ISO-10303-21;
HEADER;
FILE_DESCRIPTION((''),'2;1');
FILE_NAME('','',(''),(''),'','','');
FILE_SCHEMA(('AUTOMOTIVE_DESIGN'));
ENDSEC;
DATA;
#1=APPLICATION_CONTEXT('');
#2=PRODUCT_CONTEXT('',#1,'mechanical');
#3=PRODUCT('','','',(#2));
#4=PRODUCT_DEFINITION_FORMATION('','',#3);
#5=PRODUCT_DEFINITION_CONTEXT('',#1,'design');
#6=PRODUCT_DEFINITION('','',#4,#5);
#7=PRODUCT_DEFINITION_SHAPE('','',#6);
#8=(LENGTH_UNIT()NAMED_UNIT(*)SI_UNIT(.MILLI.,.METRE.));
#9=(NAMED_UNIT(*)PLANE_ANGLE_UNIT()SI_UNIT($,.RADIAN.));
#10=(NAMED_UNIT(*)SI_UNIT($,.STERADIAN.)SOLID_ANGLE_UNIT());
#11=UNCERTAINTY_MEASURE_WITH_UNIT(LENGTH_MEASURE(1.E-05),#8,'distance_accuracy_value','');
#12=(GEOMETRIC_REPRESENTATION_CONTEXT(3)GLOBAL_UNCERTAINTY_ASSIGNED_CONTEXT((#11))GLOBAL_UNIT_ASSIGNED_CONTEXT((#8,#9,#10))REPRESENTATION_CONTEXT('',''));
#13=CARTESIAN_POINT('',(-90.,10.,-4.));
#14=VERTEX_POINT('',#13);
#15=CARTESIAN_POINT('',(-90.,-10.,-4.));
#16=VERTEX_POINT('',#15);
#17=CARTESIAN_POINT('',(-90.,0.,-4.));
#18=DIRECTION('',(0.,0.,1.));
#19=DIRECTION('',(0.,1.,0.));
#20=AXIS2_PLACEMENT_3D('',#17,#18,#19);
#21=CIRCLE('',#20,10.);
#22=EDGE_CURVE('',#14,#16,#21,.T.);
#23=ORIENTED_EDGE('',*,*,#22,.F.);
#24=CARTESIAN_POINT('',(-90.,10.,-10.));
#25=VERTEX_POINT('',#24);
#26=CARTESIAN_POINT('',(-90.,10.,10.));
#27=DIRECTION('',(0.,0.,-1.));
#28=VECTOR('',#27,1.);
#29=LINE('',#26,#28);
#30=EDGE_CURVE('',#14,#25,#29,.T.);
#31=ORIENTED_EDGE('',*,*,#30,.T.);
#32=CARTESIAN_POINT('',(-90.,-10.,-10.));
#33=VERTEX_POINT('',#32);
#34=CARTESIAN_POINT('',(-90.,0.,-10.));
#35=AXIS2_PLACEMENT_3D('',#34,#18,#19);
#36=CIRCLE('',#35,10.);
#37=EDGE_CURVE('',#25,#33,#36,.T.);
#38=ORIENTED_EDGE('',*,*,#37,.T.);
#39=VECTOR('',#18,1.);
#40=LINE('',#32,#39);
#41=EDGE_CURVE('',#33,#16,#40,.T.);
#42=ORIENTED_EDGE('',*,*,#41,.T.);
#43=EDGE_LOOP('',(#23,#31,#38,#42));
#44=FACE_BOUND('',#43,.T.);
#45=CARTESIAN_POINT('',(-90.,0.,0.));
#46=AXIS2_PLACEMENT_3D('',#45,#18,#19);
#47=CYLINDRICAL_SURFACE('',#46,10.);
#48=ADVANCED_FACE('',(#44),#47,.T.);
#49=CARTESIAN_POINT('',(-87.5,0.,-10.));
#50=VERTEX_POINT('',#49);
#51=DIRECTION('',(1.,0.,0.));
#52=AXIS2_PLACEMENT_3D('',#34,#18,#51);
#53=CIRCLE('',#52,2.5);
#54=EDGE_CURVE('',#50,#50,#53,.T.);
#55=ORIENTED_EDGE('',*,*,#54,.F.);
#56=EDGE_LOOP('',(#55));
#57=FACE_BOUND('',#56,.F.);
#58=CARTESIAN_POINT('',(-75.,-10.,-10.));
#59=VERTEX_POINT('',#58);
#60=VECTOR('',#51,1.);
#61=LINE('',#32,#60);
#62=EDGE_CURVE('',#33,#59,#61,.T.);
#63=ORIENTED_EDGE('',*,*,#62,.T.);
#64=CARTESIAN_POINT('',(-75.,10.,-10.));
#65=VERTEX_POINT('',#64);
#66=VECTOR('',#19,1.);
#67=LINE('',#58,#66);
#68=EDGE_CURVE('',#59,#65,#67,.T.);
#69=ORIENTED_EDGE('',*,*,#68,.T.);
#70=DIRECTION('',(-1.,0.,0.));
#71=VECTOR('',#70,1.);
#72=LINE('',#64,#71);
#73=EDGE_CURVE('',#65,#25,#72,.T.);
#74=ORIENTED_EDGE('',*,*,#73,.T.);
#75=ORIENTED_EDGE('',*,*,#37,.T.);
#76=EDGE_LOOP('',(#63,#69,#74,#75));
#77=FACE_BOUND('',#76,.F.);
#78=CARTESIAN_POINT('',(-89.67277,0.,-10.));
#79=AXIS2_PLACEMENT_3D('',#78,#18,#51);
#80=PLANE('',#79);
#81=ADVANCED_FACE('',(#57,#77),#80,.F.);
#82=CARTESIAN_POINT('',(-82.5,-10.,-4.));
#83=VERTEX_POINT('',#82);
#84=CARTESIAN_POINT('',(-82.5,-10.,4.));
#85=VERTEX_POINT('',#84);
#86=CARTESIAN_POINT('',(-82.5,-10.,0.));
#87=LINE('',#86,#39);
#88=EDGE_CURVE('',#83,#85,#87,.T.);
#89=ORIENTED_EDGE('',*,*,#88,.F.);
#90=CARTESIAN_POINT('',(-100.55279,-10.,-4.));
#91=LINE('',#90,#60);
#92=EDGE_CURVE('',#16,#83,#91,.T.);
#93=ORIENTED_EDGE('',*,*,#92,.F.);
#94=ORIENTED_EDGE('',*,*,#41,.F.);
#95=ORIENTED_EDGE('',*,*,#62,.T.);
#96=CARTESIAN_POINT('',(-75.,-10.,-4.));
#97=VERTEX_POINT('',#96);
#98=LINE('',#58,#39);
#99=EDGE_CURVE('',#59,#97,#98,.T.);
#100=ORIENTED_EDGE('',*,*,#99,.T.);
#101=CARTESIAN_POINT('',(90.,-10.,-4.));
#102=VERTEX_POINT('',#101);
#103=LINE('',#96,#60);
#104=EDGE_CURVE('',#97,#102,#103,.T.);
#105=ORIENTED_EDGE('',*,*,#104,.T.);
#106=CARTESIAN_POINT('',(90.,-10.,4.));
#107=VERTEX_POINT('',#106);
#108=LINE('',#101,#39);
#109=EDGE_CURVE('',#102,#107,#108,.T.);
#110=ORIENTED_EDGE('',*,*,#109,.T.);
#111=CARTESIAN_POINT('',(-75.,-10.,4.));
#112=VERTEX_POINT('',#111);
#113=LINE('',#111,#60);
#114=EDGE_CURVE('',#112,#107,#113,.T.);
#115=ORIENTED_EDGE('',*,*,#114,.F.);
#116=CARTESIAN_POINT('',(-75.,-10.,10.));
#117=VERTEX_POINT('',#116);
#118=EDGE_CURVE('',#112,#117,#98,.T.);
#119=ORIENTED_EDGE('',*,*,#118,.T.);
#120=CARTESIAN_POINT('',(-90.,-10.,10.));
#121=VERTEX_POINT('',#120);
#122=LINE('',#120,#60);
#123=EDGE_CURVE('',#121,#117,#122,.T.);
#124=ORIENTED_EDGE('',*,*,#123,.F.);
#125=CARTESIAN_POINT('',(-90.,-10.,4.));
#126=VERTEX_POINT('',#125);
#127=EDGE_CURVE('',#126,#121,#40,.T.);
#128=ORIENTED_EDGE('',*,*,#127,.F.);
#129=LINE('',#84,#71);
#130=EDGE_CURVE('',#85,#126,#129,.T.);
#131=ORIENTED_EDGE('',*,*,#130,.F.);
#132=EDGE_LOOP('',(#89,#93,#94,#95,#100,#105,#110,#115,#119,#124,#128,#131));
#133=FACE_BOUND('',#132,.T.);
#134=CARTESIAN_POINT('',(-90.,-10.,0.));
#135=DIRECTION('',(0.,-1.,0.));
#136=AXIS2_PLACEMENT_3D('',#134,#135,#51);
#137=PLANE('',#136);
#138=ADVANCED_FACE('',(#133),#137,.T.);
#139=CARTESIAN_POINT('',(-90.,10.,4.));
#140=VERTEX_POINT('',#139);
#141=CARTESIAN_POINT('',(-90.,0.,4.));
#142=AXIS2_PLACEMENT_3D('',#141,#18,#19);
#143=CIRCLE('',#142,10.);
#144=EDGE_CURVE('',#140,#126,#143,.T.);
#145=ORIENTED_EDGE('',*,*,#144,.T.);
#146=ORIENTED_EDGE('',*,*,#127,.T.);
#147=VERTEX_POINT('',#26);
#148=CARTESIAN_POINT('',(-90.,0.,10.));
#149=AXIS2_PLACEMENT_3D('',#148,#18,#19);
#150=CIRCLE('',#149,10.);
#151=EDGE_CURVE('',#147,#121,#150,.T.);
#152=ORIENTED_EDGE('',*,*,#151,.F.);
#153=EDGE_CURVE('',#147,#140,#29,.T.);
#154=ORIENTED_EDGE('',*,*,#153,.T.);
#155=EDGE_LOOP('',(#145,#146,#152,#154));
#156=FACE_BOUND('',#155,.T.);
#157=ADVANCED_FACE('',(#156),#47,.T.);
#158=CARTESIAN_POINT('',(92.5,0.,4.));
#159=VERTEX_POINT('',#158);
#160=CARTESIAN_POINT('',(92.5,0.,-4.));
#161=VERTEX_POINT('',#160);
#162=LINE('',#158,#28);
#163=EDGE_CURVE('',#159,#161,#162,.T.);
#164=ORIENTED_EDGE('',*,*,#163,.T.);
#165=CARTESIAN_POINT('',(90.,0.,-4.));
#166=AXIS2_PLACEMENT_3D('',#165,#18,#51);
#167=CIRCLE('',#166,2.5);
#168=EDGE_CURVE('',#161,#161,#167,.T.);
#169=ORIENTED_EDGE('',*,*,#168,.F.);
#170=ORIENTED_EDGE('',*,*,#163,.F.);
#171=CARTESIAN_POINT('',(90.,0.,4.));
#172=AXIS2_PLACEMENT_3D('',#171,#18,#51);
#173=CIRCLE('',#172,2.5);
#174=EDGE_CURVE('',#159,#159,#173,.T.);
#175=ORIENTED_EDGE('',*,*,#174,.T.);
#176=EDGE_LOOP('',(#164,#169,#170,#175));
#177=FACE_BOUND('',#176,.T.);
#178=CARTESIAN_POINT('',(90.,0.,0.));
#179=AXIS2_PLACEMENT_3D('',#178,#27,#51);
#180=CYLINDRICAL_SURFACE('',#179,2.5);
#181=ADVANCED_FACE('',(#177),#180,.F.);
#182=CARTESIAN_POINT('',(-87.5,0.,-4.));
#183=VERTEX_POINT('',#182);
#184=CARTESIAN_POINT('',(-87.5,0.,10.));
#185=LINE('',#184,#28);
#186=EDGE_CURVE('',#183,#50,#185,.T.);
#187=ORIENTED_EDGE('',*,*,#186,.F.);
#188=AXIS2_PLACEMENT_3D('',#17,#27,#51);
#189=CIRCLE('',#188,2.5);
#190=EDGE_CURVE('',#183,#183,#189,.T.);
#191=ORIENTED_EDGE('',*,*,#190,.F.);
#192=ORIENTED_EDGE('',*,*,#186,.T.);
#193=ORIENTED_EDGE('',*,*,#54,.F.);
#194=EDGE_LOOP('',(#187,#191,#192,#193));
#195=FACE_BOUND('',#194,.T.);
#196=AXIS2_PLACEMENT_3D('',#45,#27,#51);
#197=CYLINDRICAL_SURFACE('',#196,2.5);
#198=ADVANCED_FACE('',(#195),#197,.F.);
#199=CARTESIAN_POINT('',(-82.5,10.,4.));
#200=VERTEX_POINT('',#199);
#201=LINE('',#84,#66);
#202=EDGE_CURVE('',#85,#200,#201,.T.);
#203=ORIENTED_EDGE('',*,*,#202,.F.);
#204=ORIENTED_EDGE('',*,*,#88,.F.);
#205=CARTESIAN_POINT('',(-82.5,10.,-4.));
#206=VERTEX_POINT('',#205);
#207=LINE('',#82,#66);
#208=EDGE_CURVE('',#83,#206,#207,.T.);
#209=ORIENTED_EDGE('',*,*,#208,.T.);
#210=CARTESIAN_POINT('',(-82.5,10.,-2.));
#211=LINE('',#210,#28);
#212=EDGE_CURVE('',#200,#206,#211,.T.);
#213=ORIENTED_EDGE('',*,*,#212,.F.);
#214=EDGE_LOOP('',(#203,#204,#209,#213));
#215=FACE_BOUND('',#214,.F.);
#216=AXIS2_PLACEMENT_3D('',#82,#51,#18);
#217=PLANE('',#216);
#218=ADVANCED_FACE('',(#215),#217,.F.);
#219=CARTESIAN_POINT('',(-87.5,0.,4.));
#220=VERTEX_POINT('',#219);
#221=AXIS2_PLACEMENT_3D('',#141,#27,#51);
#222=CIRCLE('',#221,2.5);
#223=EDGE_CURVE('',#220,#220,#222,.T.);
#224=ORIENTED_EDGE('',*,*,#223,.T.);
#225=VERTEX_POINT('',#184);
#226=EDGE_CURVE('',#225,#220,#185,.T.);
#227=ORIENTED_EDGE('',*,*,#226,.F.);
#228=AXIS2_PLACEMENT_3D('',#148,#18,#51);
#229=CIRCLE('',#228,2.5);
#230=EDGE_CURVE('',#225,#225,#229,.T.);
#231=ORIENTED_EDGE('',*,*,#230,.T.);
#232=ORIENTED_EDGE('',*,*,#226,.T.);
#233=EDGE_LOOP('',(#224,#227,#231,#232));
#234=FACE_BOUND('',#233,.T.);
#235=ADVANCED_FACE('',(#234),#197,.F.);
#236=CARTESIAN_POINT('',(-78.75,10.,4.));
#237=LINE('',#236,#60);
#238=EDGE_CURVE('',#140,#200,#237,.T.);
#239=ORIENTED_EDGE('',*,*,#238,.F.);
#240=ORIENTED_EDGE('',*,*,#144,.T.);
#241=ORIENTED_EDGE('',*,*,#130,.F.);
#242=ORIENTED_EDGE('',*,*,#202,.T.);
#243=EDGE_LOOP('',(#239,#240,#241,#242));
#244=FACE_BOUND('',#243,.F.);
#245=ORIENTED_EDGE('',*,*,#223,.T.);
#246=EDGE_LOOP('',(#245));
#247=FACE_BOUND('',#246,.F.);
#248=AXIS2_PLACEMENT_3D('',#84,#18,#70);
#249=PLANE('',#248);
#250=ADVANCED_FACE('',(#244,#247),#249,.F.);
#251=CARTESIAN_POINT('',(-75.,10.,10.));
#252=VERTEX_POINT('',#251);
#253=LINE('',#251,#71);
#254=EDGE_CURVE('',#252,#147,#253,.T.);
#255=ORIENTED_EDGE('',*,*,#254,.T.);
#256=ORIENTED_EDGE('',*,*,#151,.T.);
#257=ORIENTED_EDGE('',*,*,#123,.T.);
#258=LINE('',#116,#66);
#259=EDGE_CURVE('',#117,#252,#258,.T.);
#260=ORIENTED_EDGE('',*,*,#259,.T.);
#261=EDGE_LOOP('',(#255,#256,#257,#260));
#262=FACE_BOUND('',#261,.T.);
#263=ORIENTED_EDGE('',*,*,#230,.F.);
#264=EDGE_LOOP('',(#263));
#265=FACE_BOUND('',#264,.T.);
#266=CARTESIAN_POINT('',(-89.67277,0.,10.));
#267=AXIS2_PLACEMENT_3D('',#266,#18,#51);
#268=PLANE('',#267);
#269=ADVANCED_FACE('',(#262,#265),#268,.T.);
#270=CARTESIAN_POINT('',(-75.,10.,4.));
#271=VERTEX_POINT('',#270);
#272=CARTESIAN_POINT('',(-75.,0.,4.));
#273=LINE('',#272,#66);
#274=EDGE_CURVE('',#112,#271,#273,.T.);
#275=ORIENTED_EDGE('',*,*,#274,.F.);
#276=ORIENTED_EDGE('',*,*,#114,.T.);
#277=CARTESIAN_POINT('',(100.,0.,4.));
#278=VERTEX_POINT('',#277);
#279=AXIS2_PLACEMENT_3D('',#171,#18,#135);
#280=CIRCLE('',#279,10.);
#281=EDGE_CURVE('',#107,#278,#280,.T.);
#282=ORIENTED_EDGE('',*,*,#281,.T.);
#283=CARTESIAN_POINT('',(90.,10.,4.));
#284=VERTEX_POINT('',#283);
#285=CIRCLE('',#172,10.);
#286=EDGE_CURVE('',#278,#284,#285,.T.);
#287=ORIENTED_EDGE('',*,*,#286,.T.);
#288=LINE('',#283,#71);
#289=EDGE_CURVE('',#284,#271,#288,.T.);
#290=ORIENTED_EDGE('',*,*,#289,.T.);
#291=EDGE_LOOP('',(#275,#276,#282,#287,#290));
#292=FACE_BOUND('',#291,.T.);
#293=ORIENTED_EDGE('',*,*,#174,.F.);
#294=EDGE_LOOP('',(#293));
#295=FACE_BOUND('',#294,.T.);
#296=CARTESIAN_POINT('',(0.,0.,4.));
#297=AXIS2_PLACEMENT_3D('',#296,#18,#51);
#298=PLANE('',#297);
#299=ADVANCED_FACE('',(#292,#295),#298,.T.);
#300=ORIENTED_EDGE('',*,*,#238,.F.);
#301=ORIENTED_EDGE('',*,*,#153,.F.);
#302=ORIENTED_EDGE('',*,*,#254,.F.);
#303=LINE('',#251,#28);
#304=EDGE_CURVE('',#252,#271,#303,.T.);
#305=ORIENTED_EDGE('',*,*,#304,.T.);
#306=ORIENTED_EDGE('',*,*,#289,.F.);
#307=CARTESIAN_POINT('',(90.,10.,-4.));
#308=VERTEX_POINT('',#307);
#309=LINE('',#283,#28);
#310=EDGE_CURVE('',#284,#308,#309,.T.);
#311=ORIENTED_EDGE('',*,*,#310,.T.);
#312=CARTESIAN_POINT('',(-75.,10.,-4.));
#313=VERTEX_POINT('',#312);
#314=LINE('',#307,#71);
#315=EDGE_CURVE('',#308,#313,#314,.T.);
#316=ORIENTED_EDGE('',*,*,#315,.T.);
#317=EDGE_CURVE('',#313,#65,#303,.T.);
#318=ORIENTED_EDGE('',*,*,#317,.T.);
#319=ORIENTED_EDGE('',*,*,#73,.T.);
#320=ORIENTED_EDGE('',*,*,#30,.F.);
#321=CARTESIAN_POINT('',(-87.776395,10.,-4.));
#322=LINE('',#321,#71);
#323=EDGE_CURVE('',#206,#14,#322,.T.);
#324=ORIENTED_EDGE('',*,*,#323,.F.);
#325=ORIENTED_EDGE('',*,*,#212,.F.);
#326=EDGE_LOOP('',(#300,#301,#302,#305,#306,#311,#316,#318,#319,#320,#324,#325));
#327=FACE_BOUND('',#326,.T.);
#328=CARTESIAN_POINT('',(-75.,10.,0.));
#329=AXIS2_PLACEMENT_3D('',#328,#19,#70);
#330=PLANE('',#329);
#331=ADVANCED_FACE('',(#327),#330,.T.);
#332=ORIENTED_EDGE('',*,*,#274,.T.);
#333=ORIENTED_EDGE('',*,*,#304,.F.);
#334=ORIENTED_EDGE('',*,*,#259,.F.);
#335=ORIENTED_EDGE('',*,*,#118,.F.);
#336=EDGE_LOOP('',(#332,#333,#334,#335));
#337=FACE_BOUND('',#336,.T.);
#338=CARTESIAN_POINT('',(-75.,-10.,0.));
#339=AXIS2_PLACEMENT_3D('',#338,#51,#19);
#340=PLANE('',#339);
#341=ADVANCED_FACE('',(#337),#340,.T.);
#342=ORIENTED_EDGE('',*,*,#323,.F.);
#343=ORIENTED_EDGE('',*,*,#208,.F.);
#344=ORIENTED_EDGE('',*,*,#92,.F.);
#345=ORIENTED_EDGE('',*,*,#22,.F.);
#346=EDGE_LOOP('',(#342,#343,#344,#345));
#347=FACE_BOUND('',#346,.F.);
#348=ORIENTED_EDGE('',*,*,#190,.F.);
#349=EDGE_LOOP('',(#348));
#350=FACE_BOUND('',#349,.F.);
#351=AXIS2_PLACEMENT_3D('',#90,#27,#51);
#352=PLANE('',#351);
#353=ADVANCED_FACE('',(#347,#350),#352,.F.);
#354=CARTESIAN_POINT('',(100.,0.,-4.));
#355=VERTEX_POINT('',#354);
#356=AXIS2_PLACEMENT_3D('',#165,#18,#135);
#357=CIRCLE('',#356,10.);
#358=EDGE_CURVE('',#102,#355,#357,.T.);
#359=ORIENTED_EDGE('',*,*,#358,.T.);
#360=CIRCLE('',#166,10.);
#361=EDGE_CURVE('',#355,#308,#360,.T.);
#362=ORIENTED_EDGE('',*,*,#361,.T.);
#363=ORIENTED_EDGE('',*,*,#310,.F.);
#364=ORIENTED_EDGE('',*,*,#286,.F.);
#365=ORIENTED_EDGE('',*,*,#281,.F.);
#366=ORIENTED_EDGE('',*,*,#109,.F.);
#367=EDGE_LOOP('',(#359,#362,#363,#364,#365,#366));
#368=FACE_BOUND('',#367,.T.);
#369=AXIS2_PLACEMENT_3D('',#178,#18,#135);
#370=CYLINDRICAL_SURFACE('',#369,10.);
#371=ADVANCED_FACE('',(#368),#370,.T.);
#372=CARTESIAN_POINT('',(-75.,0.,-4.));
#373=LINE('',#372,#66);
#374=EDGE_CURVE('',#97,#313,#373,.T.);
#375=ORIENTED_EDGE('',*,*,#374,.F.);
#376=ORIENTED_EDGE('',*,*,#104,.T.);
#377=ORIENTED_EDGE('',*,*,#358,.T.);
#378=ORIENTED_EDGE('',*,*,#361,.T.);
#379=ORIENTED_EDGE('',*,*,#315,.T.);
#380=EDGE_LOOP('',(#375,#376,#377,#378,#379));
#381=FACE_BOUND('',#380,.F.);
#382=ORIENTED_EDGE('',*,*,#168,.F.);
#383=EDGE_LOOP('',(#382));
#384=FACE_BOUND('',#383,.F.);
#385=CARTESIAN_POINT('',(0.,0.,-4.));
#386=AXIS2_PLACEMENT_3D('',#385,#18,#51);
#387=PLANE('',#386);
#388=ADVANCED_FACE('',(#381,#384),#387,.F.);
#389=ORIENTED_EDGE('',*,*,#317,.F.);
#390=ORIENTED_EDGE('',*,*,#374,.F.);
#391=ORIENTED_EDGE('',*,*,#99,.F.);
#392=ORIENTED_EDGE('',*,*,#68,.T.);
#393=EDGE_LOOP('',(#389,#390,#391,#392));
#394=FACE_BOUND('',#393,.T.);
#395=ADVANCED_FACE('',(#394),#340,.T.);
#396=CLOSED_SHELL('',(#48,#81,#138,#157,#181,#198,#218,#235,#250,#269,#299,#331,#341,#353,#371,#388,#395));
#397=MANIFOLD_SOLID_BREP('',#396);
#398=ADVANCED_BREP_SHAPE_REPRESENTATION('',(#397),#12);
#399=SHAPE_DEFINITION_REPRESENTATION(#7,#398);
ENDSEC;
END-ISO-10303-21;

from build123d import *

# Parameters (mm, degrees)
F0_W     = 150
F0_H     = 20
F0_R     = 2.5
F1_DEPTH = 4
F2_DEPTH = 10
F3_W     = 7.5
F3_H     = 8
F3_W_2   = 10.5527898669
F4_DEPTH = 25


# Not quite as in the source:
# - a feature names something its author has since deleted; it is built from what else it names


with BuildPart() as f1:
    # F0 (on Top) → F1 (new body, symmetric)
    with BuildSketch(Plane.XY):
        Rectangle(F0_W, F0_H)
        with BuildLine():
            Line((90, 10), (75, 10))
            Line((75, 10), (75, -10))
            Line((75, -10), (90, -10))
            ThreePointArc((90, -10), (80, 0), (90, 10))
        make_face()
        with BuildLine():
            ThreePointArc((100, 0), (97.0710678119, 7.0710678119), (90, 10))
            ThreePointArc((90, 10), (80, 0), (90, -10))
            ThreePointArc((90, -10), (97.0710678119, -7.0710678119), (100, 0))
        make_face()
        with Locations((90, 0)):
            Circle(F0_R, mode=Mode.SUBTRACT)
    extrude(amount=F1_DEPTH, both=True)

    # F0 (on Top) → F2 (join, symmetric)
    with BuildSketch(Plane.XY):
        with BuildLine():
            ThreePointArc((-80, 0), (-82.9289321881, 7.0710678119), (-90, 10))
            ThreePointArc((-90, 10), (-100, 0), (-90, -10))
            ThreePointArc((-90, -10), (-82.9289321881, -7.0710678119), (-80, 0))
        make_face()
        with Locations((-90, 0)):
            Circle(F0_R, mode=Mode.SUBTRACT)
        with BuildLine():
            Line((-75, -10), (-75, 10))
            Line((-75, 10), (-90, 10))
            ThreePointArc((-90, 10), (-82.9289321881, 7.0710678119), (-80, 0))
            ThreePointArc((-80, 0), (-82.9289321881, -7.0710678119), (-90, -10))
            Line((-90, -10), (-75, -10))
        make_face()
    extrude(amount=F2_DEPTH, both=True)

    # F3 (on face) → F4 (cut)
    with BuildSketch(Plane.XZ.offset(10)):
        with Locations((-86.25, 0)):
            Rectangle(F3_W, F3_H)
        with Locations((-95.2763949335, 0)):
            Rectangle(F3_W_2, F3_H)
    extrude(amount=-F4_DEPTH, mode=Mode.SUBTRACT)


solid = f1.part
